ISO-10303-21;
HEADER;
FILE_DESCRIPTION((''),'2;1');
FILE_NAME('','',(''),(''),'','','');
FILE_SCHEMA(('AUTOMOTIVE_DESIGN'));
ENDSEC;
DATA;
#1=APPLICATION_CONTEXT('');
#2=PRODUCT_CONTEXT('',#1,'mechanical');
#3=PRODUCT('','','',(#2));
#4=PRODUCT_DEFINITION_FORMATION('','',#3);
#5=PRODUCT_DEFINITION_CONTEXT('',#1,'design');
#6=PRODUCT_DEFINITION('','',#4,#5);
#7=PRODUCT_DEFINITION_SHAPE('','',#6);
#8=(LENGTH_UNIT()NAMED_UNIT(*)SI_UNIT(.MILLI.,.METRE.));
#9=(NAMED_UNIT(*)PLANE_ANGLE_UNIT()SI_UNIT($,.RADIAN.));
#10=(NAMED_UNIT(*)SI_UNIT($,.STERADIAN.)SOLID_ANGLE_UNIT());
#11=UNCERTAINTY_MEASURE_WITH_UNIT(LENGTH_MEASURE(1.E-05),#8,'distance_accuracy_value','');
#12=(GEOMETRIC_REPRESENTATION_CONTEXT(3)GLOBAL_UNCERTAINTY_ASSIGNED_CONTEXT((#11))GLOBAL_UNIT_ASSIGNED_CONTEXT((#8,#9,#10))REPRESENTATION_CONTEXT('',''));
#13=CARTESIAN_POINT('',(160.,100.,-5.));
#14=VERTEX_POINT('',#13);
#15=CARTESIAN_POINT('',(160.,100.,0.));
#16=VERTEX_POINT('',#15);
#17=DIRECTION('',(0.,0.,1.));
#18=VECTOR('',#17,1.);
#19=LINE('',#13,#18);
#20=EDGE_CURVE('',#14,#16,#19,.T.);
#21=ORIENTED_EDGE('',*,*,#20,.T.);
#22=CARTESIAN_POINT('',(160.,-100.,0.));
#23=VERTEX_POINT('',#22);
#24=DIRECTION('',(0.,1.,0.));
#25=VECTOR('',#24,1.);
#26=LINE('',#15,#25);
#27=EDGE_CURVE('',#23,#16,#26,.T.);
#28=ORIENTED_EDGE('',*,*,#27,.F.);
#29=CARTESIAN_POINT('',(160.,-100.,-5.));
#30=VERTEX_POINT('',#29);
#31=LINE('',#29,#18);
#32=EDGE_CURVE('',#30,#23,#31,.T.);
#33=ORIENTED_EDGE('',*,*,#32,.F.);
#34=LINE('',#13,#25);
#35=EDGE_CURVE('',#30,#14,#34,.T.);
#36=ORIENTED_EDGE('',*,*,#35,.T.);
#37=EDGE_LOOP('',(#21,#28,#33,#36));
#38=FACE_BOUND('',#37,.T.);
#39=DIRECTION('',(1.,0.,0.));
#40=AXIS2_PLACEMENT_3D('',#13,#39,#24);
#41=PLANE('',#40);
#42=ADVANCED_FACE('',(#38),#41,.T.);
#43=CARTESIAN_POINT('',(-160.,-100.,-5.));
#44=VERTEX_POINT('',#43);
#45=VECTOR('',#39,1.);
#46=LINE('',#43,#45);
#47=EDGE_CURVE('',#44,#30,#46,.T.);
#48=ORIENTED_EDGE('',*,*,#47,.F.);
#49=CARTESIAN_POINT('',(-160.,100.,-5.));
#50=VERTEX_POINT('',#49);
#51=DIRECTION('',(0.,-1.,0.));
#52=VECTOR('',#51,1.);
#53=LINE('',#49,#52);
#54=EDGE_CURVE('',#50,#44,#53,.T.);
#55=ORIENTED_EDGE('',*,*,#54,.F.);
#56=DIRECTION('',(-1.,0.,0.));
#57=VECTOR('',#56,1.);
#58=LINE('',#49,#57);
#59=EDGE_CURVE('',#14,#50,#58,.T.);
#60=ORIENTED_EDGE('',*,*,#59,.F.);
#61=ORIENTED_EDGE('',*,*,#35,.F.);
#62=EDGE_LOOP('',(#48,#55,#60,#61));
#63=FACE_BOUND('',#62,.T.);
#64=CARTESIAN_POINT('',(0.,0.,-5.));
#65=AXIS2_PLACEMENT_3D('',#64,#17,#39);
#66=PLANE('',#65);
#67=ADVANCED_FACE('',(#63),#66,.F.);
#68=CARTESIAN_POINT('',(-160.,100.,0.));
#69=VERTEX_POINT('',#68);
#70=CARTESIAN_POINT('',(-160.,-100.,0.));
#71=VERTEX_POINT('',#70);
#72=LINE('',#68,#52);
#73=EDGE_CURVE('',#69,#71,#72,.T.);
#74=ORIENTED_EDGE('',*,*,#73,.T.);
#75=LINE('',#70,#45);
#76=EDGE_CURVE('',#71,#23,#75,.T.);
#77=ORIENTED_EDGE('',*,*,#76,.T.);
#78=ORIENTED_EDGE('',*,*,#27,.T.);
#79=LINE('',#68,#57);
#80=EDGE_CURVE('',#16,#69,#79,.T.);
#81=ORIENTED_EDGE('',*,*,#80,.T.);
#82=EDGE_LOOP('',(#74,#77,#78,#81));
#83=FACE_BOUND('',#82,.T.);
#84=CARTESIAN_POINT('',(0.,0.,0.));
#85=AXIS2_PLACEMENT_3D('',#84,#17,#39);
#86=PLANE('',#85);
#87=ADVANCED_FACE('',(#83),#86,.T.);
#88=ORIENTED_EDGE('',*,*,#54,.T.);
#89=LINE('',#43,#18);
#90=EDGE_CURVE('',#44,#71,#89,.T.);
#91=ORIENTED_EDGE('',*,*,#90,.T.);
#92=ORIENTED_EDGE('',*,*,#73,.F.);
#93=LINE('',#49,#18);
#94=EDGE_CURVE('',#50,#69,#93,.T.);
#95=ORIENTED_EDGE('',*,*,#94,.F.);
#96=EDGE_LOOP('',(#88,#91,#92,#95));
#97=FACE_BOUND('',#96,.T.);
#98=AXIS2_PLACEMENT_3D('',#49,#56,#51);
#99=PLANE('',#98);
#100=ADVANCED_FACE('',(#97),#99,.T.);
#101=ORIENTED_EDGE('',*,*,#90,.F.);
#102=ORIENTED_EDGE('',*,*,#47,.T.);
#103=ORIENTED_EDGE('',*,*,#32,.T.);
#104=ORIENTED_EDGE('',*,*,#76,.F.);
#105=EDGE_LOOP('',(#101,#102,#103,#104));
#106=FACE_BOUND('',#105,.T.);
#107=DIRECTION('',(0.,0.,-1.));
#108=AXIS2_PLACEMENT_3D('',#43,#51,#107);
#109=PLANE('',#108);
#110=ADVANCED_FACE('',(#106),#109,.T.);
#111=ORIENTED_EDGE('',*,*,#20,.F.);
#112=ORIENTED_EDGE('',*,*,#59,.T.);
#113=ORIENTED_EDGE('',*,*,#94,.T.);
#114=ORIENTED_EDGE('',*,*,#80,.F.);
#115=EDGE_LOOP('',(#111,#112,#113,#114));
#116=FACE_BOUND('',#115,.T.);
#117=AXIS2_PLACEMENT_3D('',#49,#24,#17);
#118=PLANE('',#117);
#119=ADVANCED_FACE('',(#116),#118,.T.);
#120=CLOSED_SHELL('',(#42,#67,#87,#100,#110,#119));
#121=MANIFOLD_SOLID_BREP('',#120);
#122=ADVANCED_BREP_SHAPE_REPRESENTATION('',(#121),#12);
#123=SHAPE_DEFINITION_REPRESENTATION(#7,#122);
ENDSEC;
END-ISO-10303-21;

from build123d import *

# Parameters (mm, degrees)
SKETCH1_W          = 320
SKETCH1_H          = 200
BASE_FLANGE1_DEPTH = 5


# Sheet-metal steps are written as plain solids
with BuildPart() as part:
    # Sketch1 → Base-Flange1 (new body)
    with BuildSketch(Plane.XY):
        Rectangle(SKETCH1_W, SKETCH1_H)
    extrude(amount=-BASE_FLANGE1_DEPTH)


solid = part.part
